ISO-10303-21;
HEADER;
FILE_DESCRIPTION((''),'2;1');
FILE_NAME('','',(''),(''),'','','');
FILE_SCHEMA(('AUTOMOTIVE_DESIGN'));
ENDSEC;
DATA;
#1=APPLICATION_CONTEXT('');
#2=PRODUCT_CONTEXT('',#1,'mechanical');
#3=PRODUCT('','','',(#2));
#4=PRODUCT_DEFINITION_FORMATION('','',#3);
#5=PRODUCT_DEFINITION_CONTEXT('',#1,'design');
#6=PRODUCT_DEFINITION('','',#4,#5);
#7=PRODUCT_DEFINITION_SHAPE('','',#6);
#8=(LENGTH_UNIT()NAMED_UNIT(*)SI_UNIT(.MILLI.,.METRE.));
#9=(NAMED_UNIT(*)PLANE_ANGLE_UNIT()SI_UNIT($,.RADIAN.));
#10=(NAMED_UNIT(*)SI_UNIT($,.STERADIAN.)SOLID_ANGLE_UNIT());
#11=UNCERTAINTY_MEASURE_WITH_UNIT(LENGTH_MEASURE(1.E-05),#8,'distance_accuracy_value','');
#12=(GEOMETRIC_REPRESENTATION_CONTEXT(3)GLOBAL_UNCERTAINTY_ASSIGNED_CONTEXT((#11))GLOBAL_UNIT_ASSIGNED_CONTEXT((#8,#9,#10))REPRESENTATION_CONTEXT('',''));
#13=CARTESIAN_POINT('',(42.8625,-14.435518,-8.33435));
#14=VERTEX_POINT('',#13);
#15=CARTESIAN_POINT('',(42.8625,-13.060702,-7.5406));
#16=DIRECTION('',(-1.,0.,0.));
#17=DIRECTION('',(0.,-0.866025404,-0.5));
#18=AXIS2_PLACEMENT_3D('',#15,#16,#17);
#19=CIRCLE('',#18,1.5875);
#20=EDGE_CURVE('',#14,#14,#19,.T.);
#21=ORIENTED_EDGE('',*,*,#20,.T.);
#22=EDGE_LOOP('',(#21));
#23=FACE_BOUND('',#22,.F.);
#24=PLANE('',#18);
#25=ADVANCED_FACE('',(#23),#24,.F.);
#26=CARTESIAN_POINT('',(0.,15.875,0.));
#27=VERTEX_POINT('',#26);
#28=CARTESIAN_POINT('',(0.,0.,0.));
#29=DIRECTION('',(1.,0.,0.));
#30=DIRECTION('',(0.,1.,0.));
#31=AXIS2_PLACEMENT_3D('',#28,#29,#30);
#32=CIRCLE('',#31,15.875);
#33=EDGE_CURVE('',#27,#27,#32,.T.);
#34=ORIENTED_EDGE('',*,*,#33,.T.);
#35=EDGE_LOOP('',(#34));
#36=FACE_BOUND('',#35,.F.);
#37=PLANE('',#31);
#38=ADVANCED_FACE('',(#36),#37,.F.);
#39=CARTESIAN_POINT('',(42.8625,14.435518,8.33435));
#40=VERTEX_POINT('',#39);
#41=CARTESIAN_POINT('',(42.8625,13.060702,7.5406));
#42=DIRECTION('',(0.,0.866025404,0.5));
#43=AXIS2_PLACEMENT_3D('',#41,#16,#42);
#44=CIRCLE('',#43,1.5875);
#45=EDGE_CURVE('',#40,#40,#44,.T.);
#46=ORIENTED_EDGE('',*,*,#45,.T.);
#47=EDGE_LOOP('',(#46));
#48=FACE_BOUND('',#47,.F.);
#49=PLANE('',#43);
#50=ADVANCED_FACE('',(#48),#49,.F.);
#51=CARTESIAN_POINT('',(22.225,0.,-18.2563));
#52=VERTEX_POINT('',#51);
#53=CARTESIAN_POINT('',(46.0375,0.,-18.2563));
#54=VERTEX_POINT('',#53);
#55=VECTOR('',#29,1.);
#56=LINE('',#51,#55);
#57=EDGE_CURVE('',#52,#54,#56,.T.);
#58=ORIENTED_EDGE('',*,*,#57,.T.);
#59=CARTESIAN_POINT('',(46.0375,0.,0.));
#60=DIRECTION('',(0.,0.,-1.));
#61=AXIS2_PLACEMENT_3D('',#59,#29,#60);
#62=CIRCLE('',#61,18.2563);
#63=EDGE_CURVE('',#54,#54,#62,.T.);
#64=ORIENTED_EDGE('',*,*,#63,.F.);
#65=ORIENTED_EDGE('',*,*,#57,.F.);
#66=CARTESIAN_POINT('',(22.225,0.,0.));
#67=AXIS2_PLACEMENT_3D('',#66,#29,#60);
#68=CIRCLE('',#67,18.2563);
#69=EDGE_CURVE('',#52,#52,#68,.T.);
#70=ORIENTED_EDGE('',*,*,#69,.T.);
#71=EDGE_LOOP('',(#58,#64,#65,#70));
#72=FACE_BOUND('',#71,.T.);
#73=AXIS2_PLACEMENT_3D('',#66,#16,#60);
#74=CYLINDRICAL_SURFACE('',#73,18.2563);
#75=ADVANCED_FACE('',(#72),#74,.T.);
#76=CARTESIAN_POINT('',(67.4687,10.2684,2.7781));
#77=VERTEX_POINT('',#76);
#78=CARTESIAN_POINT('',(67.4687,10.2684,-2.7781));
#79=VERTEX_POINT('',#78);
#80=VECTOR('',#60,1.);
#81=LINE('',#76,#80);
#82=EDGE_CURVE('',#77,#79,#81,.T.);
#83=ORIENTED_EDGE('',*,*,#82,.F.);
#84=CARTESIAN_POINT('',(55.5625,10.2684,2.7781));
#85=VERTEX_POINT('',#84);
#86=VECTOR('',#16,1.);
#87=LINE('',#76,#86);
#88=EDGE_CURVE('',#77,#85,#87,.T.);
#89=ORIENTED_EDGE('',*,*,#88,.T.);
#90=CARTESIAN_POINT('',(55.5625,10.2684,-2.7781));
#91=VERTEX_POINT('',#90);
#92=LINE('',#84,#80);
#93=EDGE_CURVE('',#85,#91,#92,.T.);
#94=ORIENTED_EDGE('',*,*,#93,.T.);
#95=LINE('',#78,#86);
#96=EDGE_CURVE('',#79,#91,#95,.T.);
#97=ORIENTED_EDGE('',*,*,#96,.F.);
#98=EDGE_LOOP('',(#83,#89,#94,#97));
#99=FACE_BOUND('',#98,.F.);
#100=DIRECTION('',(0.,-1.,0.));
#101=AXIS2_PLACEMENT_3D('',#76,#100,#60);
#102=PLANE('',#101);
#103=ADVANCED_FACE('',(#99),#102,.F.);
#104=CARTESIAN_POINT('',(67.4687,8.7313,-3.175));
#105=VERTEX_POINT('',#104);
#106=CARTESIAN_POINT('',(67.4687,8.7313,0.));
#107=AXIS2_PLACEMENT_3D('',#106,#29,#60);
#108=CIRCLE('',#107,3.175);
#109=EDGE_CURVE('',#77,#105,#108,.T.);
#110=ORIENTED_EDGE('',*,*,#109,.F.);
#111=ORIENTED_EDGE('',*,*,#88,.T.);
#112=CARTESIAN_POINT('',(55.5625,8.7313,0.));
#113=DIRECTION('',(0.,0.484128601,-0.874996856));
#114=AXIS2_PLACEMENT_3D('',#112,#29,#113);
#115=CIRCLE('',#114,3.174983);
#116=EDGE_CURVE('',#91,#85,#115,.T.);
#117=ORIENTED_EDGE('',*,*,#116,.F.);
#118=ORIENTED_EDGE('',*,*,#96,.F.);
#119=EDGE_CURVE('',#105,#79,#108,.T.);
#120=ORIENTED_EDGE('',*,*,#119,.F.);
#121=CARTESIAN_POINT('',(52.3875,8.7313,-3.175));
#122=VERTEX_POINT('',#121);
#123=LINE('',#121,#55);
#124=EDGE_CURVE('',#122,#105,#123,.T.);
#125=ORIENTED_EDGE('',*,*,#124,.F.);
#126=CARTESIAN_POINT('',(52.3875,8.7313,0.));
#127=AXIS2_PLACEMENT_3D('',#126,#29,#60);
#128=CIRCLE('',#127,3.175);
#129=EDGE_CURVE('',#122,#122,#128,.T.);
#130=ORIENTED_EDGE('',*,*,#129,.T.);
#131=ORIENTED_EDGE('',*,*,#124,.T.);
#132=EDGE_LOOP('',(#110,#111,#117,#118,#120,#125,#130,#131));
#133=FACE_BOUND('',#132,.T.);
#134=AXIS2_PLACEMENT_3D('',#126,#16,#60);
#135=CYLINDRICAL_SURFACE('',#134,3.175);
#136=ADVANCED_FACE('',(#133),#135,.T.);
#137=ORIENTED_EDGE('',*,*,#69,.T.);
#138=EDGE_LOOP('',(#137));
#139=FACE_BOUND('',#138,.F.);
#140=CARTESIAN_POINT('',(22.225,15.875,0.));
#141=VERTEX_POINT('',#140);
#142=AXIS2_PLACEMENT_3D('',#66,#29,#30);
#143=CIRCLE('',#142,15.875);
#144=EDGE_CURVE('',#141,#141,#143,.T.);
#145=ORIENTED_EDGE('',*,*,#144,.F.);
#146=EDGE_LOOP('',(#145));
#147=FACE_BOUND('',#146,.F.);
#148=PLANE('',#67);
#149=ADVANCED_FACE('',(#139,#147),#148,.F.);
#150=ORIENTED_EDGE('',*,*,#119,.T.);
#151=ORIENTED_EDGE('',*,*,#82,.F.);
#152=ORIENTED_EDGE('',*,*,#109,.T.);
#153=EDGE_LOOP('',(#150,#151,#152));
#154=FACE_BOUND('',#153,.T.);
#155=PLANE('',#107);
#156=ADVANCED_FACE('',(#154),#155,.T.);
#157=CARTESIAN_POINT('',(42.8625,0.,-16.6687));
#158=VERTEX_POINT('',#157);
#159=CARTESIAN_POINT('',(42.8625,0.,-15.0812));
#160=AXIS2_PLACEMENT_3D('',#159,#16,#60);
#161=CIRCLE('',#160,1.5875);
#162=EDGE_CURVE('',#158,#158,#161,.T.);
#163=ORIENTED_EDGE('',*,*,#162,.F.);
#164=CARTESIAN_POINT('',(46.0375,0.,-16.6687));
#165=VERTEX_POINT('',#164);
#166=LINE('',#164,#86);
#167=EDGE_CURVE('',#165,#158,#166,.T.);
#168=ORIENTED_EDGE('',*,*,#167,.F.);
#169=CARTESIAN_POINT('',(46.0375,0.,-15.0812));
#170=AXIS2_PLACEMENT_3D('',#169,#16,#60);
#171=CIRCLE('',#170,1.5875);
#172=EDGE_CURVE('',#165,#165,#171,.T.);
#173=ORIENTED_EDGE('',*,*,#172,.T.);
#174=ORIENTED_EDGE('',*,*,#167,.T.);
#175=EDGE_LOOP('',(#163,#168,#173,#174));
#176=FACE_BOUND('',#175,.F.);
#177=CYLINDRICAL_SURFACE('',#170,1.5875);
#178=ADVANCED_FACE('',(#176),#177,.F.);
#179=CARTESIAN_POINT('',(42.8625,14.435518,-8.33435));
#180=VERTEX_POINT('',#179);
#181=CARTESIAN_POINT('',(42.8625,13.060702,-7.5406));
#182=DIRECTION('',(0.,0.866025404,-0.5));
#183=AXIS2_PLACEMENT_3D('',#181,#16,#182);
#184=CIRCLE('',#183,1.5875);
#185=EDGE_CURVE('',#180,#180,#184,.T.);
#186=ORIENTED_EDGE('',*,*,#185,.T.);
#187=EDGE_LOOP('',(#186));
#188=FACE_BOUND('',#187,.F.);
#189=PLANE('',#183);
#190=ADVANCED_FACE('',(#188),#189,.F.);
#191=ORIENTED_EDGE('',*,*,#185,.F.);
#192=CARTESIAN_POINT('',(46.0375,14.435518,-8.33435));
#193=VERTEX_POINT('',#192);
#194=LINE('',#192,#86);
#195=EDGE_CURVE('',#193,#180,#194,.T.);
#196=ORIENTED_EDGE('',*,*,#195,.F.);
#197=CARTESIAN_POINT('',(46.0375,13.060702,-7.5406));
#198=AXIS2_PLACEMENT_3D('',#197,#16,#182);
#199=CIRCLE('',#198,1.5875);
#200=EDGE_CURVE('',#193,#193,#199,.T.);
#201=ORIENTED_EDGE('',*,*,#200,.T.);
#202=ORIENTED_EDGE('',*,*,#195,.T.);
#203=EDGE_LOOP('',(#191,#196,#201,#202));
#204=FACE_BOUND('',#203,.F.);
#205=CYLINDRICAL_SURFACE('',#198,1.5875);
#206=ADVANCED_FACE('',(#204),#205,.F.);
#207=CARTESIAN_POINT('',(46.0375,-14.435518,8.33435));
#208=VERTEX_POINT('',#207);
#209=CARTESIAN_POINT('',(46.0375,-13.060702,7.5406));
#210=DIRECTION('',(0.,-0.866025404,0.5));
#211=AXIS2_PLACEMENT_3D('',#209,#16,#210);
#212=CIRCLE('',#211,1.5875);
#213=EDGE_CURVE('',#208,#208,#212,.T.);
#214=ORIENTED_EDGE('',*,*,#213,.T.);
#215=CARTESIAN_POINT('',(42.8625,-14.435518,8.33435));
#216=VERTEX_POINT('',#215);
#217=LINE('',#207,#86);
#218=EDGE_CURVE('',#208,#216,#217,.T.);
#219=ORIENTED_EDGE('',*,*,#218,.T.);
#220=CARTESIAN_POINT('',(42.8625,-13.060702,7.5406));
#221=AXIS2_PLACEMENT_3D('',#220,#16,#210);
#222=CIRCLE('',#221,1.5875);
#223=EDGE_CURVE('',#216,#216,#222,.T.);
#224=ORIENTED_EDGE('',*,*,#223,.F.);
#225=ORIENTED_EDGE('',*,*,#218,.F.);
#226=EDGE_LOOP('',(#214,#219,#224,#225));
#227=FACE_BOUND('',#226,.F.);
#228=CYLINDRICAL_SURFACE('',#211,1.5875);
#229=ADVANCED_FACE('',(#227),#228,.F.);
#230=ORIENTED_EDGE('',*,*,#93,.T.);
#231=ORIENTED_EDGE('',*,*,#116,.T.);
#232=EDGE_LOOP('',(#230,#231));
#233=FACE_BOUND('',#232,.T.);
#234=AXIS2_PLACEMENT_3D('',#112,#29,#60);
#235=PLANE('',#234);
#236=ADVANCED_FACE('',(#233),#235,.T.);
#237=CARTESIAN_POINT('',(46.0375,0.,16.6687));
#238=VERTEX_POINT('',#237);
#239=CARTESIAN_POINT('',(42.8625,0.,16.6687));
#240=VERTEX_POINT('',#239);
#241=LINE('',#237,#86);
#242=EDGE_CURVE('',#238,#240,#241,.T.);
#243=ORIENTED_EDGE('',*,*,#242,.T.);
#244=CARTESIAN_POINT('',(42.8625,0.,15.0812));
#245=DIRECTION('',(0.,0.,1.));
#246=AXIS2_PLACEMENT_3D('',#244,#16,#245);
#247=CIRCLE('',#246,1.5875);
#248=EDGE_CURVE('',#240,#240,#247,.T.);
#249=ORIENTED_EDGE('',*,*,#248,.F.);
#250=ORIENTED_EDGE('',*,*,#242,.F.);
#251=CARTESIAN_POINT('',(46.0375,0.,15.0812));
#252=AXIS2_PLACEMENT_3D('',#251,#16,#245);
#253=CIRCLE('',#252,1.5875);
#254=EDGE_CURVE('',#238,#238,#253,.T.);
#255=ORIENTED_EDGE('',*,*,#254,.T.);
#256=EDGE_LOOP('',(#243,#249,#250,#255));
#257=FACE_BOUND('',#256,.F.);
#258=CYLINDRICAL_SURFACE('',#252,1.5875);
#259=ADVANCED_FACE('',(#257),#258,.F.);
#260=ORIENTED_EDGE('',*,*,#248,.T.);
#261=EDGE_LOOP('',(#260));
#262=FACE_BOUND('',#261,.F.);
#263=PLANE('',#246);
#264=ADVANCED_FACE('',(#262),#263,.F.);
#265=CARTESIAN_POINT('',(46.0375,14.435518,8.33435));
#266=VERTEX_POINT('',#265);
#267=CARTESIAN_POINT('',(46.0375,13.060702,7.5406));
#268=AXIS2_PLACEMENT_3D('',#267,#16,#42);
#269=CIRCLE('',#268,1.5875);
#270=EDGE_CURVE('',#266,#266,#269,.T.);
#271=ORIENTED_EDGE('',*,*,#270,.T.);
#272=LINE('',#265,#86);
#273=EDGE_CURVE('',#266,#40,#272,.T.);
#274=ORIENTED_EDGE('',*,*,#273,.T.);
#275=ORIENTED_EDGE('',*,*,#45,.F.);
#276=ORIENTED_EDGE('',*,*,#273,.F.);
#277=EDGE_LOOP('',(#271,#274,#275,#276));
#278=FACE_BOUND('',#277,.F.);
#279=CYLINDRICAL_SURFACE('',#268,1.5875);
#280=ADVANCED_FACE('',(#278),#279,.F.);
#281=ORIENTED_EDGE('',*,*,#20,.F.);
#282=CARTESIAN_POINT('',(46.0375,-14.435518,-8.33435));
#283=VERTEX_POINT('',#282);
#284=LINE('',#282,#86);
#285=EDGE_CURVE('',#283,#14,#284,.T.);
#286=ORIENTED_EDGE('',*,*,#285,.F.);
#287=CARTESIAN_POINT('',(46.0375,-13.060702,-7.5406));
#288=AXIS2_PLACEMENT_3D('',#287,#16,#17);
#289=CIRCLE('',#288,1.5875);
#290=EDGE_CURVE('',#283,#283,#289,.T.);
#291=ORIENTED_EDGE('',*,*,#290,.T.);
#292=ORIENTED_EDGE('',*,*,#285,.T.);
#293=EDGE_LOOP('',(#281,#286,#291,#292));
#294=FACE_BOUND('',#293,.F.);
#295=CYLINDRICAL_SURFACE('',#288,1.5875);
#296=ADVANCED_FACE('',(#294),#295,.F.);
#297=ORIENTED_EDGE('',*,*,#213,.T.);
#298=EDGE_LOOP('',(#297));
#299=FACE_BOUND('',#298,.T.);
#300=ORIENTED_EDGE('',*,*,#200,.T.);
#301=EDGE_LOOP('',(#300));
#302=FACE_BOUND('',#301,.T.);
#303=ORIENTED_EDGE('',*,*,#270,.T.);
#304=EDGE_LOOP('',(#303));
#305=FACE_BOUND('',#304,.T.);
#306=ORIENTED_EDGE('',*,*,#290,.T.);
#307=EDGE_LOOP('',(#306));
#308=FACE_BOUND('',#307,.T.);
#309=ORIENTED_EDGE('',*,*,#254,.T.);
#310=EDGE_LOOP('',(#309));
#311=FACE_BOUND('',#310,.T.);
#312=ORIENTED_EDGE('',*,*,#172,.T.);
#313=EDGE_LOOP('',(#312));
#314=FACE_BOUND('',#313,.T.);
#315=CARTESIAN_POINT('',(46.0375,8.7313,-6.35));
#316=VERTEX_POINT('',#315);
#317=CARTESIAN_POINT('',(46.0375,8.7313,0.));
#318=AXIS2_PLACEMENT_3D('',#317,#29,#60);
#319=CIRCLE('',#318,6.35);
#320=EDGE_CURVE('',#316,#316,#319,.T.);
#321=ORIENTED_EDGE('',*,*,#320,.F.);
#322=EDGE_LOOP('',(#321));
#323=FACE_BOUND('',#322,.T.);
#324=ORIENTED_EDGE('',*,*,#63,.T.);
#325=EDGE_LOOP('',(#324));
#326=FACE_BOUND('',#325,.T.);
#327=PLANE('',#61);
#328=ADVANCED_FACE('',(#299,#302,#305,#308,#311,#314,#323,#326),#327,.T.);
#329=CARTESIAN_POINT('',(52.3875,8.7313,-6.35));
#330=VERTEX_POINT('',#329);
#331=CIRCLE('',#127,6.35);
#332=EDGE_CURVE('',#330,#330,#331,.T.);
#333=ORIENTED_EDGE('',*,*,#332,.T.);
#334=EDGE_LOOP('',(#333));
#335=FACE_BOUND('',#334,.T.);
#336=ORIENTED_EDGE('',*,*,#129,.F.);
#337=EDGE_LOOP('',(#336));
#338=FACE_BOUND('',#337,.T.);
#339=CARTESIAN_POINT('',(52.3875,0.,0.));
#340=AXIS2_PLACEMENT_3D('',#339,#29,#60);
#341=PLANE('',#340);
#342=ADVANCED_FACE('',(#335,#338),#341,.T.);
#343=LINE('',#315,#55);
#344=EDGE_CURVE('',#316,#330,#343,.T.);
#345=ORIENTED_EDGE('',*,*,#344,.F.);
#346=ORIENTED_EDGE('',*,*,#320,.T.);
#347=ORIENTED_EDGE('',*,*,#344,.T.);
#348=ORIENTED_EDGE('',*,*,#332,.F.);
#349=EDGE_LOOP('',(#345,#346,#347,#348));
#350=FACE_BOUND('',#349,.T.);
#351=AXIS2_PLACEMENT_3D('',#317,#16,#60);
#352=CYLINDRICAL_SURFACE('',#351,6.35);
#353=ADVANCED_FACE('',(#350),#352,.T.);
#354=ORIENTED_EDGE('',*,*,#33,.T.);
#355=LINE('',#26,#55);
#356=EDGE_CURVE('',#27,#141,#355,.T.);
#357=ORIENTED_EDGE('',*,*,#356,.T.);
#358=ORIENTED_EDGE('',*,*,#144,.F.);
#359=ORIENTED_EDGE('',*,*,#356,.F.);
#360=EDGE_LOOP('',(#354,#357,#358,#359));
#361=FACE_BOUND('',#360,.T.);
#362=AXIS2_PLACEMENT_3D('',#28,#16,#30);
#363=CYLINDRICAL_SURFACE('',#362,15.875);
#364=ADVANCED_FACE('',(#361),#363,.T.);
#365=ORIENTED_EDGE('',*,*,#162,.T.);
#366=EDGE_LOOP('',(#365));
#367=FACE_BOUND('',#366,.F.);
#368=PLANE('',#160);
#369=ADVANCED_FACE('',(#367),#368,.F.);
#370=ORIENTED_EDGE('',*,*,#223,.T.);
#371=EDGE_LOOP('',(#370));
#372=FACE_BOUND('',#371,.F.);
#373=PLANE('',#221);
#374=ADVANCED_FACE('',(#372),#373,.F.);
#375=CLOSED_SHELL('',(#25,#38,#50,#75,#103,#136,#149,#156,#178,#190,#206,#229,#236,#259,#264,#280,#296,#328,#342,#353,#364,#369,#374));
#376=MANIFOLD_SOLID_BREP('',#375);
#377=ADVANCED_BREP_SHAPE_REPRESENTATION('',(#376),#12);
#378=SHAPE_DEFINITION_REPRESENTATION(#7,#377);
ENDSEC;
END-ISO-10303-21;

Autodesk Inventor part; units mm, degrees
ref_plane "YZ Plane" through (0, 0, 0) normal (1, 0, 0) x (0, 1, 0)
ref_plane "XZ Plane" through (0, 0, 0) normal (0, 1, 0) x (-1, 0, 0)
ref_plane "XY Plane" through (0, 0, 0) normal (0, 0, 1) x (1, 0, 0)
sketch "Sketch1" plane through (0, 0, 0) normal (1, 0, 0) x (0, 1, 0)
  circle A0 centre (0, 0) radius 15.875
  dimension "d0" = 31.75
extrude "Extrusion1" add sketch "Sketch1" along normal blind 22.225
sketch "Sketch2" plane through (22.225, 0, 0) normal (1, 0, 0) x (0, 0, -1)
  circle A0 centre (0, 0) radius 15.875 construction
  circle A1 centre (0, 0) radius 18.2563
  dimension "d3" = 36.5125
extrude "Extrusion2" add sketch "Sketch2" along normal blind 23.8125
sketch "Sketch3" plane through (46.0375, 0, 0) normal (1, 0, 0) x (0, 0, -1)
  circle A0 centre (0, 8.7313) radius 6.35
  circle A1 centre (0, 8.7313) radius 8.7313 construction
  line L0 (0, -25.5588) -> (0, 25.5588) construction
  point P0 (0, 0)
  dimension "d13" = 17.4625
  dimension "d7" = 12.7
extrude "Extrusion3" add sketch "Sketch3" along normal blind 6.35
sketch "Sketch4" plane through (52.3875, 8.7313, 0) normal (1, 0, 0) x (0, 0, -1)
  circle A0 centre (0, 0) radius 3.175
  circle A1 centre (0, 0) radius 6.35 construction
  point P0 (0, -8.7313)
  dimension "d10" = 6.35
extrude "Extrusion4" add sketch "Sketch4" along normal blind 15.0812
sketch "Sketch5" plane through (46.0375, 0, 0) normal (1, 0, 0) x (0, 0, -1)
  circle A0 centre (0, 0) radius 15.0812 construction
  line L0 (25.5588, 0) -> (-25.5588, 0) construction
  point P0 (15.0812, 0)
  dimension "d14" = 30.1625
hole "Hole1" at (46.0375, 0, -15.0812) direction (-1, 0, 0) diameter 3.175 depth 3.175
pattern_circular "Circular Pattern1" count 6 over 360 about axis through (-10, 0, 0) along (1, 0, 0) of "Hole1"
sketch "Sketch6" plane through (67.4687, 8.7313, 0) normal (1, 0, 0) x (0, 0, -1)
  circle A0 centre (0, 0) radius 3.175 construction
  line L0 (-2.7781, 1.5371) -> (2.7781, 1.5371)
  arc A1 (2.7781, 1.5371) -> (-2.7781, 1.5371) centre (0, 0) ccw
  point P0 (0, -8.7313)
  dimension "d25" = 5.5563
extrude "Extrusion5" cut sketch "Sketch6" against normal blind 11.9062
properties part number "Nextrox-Mini-12VDC-60rpmGearbox-Motor" material "Stainless Steel"
